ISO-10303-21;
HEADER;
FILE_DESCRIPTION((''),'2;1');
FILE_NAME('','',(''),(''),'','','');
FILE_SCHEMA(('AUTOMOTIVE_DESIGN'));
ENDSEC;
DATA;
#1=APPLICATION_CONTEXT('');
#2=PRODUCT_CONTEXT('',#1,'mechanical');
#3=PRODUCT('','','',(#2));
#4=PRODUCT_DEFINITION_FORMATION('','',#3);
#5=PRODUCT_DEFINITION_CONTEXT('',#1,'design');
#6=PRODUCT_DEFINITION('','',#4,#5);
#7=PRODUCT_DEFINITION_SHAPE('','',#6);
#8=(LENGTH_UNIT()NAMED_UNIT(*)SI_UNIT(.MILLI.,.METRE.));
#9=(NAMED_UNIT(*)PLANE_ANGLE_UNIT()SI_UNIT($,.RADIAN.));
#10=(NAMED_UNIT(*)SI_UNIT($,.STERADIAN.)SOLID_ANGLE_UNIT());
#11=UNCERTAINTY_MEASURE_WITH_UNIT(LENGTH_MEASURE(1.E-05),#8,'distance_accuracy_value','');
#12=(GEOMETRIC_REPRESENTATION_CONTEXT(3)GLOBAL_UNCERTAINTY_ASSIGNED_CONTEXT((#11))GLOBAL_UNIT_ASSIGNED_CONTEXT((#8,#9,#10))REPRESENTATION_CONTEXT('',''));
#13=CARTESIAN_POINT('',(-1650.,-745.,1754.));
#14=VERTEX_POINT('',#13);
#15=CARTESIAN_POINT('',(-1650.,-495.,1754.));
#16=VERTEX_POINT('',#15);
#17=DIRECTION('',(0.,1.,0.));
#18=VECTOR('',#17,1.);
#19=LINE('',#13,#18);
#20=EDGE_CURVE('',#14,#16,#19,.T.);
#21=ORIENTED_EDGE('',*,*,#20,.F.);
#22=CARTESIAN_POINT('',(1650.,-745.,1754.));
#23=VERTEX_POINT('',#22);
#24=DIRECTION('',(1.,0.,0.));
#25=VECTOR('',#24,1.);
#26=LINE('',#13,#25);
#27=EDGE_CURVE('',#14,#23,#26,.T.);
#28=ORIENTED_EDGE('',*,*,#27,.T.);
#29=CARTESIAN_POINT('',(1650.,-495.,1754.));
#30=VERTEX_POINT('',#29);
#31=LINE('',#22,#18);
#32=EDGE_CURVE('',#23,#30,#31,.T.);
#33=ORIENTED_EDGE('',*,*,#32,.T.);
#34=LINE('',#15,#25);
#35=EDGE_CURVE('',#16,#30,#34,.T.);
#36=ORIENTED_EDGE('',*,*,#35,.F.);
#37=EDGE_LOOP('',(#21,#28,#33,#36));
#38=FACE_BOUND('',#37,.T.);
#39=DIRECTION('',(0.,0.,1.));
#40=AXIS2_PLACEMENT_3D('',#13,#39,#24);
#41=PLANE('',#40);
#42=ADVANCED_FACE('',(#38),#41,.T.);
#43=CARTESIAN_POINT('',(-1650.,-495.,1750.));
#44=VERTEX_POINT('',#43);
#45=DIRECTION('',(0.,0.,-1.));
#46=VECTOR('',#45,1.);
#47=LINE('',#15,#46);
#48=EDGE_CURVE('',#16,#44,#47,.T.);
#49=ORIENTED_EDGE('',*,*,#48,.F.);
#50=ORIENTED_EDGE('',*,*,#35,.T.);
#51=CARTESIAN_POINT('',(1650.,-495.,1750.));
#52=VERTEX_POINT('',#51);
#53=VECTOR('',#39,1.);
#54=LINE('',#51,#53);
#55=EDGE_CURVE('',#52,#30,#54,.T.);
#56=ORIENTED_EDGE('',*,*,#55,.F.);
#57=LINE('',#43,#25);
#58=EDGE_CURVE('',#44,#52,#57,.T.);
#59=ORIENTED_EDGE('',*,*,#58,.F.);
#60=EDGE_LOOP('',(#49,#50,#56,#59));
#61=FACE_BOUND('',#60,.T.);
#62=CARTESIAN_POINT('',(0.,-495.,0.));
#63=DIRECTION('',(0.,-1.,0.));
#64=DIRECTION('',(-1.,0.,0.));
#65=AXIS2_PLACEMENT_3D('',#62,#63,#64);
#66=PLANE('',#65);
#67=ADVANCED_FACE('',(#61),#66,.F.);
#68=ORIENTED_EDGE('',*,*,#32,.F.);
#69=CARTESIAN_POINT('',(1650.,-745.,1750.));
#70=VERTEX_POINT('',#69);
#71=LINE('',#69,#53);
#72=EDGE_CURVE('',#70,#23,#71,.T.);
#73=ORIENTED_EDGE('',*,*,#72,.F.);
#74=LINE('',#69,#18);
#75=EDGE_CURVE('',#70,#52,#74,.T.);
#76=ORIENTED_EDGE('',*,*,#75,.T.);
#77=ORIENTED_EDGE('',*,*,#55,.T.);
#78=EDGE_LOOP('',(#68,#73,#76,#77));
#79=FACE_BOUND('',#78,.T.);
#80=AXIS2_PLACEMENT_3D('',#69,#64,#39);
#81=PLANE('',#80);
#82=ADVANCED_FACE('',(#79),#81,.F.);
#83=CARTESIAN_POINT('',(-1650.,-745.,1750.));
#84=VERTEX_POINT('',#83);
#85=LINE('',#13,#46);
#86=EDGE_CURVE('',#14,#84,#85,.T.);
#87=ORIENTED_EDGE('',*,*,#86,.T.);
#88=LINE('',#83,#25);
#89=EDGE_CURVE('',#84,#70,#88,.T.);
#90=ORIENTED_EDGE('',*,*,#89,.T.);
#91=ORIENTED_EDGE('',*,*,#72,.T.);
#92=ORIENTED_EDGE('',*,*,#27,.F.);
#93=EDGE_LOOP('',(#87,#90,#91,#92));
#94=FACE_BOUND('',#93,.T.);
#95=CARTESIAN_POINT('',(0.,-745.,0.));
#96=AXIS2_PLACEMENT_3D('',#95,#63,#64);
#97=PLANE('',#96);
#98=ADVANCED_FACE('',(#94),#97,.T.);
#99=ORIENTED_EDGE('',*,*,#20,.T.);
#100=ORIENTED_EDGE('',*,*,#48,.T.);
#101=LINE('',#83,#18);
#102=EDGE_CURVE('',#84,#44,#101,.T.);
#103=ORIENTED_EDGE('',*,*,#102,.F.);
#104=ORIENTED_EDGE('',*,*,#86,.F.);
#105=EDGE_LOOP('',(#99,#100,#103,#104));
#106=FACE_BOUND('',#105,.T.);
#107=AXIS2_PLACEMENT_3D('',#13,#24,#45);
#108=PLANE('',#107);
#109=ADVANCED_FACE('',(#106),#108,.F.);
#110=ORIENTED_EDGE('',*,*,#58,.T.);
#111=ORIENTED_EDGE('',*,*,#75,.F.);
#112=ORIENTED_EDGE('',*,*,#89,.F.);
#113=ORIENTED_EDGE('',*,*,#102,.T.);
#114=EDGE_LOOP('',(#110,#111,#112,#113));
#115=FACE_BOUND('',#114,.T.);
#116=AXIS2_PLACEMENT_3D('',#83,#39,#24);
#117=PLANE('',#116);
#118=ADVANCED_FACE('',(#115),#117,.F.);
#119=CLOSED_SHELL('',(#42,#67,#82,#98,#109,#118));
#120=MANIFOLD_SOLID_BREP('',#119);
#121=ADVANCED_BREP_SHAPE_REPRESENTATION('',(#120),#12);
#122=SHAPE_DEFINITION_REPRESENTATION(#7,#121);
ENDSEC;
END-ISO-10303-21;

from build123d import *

# Parameters (mm, degrees)
SKETCH_7_W             = 3300
SKETCH_7_H             = 4
SM_BASE_FLANGE_2_DEPTH = 250


# Sheet-metal steps are written as plain solids
with BuildPart() as part:
    # 草图7 → 基体-法兰2 (new body)
    with BuildSketch(Plane(origin=(0, -495, 0), x_dir=(1, 0, 0), z_dir=(0, 1, 0))):
        with Locations((0, -1752)):
            Rectangle(SKETCH_7_W, SKETCH_7_H)
    extrude(amount=-SM_BASE_FLANGE_2_DEPTH)


solid = part.part
